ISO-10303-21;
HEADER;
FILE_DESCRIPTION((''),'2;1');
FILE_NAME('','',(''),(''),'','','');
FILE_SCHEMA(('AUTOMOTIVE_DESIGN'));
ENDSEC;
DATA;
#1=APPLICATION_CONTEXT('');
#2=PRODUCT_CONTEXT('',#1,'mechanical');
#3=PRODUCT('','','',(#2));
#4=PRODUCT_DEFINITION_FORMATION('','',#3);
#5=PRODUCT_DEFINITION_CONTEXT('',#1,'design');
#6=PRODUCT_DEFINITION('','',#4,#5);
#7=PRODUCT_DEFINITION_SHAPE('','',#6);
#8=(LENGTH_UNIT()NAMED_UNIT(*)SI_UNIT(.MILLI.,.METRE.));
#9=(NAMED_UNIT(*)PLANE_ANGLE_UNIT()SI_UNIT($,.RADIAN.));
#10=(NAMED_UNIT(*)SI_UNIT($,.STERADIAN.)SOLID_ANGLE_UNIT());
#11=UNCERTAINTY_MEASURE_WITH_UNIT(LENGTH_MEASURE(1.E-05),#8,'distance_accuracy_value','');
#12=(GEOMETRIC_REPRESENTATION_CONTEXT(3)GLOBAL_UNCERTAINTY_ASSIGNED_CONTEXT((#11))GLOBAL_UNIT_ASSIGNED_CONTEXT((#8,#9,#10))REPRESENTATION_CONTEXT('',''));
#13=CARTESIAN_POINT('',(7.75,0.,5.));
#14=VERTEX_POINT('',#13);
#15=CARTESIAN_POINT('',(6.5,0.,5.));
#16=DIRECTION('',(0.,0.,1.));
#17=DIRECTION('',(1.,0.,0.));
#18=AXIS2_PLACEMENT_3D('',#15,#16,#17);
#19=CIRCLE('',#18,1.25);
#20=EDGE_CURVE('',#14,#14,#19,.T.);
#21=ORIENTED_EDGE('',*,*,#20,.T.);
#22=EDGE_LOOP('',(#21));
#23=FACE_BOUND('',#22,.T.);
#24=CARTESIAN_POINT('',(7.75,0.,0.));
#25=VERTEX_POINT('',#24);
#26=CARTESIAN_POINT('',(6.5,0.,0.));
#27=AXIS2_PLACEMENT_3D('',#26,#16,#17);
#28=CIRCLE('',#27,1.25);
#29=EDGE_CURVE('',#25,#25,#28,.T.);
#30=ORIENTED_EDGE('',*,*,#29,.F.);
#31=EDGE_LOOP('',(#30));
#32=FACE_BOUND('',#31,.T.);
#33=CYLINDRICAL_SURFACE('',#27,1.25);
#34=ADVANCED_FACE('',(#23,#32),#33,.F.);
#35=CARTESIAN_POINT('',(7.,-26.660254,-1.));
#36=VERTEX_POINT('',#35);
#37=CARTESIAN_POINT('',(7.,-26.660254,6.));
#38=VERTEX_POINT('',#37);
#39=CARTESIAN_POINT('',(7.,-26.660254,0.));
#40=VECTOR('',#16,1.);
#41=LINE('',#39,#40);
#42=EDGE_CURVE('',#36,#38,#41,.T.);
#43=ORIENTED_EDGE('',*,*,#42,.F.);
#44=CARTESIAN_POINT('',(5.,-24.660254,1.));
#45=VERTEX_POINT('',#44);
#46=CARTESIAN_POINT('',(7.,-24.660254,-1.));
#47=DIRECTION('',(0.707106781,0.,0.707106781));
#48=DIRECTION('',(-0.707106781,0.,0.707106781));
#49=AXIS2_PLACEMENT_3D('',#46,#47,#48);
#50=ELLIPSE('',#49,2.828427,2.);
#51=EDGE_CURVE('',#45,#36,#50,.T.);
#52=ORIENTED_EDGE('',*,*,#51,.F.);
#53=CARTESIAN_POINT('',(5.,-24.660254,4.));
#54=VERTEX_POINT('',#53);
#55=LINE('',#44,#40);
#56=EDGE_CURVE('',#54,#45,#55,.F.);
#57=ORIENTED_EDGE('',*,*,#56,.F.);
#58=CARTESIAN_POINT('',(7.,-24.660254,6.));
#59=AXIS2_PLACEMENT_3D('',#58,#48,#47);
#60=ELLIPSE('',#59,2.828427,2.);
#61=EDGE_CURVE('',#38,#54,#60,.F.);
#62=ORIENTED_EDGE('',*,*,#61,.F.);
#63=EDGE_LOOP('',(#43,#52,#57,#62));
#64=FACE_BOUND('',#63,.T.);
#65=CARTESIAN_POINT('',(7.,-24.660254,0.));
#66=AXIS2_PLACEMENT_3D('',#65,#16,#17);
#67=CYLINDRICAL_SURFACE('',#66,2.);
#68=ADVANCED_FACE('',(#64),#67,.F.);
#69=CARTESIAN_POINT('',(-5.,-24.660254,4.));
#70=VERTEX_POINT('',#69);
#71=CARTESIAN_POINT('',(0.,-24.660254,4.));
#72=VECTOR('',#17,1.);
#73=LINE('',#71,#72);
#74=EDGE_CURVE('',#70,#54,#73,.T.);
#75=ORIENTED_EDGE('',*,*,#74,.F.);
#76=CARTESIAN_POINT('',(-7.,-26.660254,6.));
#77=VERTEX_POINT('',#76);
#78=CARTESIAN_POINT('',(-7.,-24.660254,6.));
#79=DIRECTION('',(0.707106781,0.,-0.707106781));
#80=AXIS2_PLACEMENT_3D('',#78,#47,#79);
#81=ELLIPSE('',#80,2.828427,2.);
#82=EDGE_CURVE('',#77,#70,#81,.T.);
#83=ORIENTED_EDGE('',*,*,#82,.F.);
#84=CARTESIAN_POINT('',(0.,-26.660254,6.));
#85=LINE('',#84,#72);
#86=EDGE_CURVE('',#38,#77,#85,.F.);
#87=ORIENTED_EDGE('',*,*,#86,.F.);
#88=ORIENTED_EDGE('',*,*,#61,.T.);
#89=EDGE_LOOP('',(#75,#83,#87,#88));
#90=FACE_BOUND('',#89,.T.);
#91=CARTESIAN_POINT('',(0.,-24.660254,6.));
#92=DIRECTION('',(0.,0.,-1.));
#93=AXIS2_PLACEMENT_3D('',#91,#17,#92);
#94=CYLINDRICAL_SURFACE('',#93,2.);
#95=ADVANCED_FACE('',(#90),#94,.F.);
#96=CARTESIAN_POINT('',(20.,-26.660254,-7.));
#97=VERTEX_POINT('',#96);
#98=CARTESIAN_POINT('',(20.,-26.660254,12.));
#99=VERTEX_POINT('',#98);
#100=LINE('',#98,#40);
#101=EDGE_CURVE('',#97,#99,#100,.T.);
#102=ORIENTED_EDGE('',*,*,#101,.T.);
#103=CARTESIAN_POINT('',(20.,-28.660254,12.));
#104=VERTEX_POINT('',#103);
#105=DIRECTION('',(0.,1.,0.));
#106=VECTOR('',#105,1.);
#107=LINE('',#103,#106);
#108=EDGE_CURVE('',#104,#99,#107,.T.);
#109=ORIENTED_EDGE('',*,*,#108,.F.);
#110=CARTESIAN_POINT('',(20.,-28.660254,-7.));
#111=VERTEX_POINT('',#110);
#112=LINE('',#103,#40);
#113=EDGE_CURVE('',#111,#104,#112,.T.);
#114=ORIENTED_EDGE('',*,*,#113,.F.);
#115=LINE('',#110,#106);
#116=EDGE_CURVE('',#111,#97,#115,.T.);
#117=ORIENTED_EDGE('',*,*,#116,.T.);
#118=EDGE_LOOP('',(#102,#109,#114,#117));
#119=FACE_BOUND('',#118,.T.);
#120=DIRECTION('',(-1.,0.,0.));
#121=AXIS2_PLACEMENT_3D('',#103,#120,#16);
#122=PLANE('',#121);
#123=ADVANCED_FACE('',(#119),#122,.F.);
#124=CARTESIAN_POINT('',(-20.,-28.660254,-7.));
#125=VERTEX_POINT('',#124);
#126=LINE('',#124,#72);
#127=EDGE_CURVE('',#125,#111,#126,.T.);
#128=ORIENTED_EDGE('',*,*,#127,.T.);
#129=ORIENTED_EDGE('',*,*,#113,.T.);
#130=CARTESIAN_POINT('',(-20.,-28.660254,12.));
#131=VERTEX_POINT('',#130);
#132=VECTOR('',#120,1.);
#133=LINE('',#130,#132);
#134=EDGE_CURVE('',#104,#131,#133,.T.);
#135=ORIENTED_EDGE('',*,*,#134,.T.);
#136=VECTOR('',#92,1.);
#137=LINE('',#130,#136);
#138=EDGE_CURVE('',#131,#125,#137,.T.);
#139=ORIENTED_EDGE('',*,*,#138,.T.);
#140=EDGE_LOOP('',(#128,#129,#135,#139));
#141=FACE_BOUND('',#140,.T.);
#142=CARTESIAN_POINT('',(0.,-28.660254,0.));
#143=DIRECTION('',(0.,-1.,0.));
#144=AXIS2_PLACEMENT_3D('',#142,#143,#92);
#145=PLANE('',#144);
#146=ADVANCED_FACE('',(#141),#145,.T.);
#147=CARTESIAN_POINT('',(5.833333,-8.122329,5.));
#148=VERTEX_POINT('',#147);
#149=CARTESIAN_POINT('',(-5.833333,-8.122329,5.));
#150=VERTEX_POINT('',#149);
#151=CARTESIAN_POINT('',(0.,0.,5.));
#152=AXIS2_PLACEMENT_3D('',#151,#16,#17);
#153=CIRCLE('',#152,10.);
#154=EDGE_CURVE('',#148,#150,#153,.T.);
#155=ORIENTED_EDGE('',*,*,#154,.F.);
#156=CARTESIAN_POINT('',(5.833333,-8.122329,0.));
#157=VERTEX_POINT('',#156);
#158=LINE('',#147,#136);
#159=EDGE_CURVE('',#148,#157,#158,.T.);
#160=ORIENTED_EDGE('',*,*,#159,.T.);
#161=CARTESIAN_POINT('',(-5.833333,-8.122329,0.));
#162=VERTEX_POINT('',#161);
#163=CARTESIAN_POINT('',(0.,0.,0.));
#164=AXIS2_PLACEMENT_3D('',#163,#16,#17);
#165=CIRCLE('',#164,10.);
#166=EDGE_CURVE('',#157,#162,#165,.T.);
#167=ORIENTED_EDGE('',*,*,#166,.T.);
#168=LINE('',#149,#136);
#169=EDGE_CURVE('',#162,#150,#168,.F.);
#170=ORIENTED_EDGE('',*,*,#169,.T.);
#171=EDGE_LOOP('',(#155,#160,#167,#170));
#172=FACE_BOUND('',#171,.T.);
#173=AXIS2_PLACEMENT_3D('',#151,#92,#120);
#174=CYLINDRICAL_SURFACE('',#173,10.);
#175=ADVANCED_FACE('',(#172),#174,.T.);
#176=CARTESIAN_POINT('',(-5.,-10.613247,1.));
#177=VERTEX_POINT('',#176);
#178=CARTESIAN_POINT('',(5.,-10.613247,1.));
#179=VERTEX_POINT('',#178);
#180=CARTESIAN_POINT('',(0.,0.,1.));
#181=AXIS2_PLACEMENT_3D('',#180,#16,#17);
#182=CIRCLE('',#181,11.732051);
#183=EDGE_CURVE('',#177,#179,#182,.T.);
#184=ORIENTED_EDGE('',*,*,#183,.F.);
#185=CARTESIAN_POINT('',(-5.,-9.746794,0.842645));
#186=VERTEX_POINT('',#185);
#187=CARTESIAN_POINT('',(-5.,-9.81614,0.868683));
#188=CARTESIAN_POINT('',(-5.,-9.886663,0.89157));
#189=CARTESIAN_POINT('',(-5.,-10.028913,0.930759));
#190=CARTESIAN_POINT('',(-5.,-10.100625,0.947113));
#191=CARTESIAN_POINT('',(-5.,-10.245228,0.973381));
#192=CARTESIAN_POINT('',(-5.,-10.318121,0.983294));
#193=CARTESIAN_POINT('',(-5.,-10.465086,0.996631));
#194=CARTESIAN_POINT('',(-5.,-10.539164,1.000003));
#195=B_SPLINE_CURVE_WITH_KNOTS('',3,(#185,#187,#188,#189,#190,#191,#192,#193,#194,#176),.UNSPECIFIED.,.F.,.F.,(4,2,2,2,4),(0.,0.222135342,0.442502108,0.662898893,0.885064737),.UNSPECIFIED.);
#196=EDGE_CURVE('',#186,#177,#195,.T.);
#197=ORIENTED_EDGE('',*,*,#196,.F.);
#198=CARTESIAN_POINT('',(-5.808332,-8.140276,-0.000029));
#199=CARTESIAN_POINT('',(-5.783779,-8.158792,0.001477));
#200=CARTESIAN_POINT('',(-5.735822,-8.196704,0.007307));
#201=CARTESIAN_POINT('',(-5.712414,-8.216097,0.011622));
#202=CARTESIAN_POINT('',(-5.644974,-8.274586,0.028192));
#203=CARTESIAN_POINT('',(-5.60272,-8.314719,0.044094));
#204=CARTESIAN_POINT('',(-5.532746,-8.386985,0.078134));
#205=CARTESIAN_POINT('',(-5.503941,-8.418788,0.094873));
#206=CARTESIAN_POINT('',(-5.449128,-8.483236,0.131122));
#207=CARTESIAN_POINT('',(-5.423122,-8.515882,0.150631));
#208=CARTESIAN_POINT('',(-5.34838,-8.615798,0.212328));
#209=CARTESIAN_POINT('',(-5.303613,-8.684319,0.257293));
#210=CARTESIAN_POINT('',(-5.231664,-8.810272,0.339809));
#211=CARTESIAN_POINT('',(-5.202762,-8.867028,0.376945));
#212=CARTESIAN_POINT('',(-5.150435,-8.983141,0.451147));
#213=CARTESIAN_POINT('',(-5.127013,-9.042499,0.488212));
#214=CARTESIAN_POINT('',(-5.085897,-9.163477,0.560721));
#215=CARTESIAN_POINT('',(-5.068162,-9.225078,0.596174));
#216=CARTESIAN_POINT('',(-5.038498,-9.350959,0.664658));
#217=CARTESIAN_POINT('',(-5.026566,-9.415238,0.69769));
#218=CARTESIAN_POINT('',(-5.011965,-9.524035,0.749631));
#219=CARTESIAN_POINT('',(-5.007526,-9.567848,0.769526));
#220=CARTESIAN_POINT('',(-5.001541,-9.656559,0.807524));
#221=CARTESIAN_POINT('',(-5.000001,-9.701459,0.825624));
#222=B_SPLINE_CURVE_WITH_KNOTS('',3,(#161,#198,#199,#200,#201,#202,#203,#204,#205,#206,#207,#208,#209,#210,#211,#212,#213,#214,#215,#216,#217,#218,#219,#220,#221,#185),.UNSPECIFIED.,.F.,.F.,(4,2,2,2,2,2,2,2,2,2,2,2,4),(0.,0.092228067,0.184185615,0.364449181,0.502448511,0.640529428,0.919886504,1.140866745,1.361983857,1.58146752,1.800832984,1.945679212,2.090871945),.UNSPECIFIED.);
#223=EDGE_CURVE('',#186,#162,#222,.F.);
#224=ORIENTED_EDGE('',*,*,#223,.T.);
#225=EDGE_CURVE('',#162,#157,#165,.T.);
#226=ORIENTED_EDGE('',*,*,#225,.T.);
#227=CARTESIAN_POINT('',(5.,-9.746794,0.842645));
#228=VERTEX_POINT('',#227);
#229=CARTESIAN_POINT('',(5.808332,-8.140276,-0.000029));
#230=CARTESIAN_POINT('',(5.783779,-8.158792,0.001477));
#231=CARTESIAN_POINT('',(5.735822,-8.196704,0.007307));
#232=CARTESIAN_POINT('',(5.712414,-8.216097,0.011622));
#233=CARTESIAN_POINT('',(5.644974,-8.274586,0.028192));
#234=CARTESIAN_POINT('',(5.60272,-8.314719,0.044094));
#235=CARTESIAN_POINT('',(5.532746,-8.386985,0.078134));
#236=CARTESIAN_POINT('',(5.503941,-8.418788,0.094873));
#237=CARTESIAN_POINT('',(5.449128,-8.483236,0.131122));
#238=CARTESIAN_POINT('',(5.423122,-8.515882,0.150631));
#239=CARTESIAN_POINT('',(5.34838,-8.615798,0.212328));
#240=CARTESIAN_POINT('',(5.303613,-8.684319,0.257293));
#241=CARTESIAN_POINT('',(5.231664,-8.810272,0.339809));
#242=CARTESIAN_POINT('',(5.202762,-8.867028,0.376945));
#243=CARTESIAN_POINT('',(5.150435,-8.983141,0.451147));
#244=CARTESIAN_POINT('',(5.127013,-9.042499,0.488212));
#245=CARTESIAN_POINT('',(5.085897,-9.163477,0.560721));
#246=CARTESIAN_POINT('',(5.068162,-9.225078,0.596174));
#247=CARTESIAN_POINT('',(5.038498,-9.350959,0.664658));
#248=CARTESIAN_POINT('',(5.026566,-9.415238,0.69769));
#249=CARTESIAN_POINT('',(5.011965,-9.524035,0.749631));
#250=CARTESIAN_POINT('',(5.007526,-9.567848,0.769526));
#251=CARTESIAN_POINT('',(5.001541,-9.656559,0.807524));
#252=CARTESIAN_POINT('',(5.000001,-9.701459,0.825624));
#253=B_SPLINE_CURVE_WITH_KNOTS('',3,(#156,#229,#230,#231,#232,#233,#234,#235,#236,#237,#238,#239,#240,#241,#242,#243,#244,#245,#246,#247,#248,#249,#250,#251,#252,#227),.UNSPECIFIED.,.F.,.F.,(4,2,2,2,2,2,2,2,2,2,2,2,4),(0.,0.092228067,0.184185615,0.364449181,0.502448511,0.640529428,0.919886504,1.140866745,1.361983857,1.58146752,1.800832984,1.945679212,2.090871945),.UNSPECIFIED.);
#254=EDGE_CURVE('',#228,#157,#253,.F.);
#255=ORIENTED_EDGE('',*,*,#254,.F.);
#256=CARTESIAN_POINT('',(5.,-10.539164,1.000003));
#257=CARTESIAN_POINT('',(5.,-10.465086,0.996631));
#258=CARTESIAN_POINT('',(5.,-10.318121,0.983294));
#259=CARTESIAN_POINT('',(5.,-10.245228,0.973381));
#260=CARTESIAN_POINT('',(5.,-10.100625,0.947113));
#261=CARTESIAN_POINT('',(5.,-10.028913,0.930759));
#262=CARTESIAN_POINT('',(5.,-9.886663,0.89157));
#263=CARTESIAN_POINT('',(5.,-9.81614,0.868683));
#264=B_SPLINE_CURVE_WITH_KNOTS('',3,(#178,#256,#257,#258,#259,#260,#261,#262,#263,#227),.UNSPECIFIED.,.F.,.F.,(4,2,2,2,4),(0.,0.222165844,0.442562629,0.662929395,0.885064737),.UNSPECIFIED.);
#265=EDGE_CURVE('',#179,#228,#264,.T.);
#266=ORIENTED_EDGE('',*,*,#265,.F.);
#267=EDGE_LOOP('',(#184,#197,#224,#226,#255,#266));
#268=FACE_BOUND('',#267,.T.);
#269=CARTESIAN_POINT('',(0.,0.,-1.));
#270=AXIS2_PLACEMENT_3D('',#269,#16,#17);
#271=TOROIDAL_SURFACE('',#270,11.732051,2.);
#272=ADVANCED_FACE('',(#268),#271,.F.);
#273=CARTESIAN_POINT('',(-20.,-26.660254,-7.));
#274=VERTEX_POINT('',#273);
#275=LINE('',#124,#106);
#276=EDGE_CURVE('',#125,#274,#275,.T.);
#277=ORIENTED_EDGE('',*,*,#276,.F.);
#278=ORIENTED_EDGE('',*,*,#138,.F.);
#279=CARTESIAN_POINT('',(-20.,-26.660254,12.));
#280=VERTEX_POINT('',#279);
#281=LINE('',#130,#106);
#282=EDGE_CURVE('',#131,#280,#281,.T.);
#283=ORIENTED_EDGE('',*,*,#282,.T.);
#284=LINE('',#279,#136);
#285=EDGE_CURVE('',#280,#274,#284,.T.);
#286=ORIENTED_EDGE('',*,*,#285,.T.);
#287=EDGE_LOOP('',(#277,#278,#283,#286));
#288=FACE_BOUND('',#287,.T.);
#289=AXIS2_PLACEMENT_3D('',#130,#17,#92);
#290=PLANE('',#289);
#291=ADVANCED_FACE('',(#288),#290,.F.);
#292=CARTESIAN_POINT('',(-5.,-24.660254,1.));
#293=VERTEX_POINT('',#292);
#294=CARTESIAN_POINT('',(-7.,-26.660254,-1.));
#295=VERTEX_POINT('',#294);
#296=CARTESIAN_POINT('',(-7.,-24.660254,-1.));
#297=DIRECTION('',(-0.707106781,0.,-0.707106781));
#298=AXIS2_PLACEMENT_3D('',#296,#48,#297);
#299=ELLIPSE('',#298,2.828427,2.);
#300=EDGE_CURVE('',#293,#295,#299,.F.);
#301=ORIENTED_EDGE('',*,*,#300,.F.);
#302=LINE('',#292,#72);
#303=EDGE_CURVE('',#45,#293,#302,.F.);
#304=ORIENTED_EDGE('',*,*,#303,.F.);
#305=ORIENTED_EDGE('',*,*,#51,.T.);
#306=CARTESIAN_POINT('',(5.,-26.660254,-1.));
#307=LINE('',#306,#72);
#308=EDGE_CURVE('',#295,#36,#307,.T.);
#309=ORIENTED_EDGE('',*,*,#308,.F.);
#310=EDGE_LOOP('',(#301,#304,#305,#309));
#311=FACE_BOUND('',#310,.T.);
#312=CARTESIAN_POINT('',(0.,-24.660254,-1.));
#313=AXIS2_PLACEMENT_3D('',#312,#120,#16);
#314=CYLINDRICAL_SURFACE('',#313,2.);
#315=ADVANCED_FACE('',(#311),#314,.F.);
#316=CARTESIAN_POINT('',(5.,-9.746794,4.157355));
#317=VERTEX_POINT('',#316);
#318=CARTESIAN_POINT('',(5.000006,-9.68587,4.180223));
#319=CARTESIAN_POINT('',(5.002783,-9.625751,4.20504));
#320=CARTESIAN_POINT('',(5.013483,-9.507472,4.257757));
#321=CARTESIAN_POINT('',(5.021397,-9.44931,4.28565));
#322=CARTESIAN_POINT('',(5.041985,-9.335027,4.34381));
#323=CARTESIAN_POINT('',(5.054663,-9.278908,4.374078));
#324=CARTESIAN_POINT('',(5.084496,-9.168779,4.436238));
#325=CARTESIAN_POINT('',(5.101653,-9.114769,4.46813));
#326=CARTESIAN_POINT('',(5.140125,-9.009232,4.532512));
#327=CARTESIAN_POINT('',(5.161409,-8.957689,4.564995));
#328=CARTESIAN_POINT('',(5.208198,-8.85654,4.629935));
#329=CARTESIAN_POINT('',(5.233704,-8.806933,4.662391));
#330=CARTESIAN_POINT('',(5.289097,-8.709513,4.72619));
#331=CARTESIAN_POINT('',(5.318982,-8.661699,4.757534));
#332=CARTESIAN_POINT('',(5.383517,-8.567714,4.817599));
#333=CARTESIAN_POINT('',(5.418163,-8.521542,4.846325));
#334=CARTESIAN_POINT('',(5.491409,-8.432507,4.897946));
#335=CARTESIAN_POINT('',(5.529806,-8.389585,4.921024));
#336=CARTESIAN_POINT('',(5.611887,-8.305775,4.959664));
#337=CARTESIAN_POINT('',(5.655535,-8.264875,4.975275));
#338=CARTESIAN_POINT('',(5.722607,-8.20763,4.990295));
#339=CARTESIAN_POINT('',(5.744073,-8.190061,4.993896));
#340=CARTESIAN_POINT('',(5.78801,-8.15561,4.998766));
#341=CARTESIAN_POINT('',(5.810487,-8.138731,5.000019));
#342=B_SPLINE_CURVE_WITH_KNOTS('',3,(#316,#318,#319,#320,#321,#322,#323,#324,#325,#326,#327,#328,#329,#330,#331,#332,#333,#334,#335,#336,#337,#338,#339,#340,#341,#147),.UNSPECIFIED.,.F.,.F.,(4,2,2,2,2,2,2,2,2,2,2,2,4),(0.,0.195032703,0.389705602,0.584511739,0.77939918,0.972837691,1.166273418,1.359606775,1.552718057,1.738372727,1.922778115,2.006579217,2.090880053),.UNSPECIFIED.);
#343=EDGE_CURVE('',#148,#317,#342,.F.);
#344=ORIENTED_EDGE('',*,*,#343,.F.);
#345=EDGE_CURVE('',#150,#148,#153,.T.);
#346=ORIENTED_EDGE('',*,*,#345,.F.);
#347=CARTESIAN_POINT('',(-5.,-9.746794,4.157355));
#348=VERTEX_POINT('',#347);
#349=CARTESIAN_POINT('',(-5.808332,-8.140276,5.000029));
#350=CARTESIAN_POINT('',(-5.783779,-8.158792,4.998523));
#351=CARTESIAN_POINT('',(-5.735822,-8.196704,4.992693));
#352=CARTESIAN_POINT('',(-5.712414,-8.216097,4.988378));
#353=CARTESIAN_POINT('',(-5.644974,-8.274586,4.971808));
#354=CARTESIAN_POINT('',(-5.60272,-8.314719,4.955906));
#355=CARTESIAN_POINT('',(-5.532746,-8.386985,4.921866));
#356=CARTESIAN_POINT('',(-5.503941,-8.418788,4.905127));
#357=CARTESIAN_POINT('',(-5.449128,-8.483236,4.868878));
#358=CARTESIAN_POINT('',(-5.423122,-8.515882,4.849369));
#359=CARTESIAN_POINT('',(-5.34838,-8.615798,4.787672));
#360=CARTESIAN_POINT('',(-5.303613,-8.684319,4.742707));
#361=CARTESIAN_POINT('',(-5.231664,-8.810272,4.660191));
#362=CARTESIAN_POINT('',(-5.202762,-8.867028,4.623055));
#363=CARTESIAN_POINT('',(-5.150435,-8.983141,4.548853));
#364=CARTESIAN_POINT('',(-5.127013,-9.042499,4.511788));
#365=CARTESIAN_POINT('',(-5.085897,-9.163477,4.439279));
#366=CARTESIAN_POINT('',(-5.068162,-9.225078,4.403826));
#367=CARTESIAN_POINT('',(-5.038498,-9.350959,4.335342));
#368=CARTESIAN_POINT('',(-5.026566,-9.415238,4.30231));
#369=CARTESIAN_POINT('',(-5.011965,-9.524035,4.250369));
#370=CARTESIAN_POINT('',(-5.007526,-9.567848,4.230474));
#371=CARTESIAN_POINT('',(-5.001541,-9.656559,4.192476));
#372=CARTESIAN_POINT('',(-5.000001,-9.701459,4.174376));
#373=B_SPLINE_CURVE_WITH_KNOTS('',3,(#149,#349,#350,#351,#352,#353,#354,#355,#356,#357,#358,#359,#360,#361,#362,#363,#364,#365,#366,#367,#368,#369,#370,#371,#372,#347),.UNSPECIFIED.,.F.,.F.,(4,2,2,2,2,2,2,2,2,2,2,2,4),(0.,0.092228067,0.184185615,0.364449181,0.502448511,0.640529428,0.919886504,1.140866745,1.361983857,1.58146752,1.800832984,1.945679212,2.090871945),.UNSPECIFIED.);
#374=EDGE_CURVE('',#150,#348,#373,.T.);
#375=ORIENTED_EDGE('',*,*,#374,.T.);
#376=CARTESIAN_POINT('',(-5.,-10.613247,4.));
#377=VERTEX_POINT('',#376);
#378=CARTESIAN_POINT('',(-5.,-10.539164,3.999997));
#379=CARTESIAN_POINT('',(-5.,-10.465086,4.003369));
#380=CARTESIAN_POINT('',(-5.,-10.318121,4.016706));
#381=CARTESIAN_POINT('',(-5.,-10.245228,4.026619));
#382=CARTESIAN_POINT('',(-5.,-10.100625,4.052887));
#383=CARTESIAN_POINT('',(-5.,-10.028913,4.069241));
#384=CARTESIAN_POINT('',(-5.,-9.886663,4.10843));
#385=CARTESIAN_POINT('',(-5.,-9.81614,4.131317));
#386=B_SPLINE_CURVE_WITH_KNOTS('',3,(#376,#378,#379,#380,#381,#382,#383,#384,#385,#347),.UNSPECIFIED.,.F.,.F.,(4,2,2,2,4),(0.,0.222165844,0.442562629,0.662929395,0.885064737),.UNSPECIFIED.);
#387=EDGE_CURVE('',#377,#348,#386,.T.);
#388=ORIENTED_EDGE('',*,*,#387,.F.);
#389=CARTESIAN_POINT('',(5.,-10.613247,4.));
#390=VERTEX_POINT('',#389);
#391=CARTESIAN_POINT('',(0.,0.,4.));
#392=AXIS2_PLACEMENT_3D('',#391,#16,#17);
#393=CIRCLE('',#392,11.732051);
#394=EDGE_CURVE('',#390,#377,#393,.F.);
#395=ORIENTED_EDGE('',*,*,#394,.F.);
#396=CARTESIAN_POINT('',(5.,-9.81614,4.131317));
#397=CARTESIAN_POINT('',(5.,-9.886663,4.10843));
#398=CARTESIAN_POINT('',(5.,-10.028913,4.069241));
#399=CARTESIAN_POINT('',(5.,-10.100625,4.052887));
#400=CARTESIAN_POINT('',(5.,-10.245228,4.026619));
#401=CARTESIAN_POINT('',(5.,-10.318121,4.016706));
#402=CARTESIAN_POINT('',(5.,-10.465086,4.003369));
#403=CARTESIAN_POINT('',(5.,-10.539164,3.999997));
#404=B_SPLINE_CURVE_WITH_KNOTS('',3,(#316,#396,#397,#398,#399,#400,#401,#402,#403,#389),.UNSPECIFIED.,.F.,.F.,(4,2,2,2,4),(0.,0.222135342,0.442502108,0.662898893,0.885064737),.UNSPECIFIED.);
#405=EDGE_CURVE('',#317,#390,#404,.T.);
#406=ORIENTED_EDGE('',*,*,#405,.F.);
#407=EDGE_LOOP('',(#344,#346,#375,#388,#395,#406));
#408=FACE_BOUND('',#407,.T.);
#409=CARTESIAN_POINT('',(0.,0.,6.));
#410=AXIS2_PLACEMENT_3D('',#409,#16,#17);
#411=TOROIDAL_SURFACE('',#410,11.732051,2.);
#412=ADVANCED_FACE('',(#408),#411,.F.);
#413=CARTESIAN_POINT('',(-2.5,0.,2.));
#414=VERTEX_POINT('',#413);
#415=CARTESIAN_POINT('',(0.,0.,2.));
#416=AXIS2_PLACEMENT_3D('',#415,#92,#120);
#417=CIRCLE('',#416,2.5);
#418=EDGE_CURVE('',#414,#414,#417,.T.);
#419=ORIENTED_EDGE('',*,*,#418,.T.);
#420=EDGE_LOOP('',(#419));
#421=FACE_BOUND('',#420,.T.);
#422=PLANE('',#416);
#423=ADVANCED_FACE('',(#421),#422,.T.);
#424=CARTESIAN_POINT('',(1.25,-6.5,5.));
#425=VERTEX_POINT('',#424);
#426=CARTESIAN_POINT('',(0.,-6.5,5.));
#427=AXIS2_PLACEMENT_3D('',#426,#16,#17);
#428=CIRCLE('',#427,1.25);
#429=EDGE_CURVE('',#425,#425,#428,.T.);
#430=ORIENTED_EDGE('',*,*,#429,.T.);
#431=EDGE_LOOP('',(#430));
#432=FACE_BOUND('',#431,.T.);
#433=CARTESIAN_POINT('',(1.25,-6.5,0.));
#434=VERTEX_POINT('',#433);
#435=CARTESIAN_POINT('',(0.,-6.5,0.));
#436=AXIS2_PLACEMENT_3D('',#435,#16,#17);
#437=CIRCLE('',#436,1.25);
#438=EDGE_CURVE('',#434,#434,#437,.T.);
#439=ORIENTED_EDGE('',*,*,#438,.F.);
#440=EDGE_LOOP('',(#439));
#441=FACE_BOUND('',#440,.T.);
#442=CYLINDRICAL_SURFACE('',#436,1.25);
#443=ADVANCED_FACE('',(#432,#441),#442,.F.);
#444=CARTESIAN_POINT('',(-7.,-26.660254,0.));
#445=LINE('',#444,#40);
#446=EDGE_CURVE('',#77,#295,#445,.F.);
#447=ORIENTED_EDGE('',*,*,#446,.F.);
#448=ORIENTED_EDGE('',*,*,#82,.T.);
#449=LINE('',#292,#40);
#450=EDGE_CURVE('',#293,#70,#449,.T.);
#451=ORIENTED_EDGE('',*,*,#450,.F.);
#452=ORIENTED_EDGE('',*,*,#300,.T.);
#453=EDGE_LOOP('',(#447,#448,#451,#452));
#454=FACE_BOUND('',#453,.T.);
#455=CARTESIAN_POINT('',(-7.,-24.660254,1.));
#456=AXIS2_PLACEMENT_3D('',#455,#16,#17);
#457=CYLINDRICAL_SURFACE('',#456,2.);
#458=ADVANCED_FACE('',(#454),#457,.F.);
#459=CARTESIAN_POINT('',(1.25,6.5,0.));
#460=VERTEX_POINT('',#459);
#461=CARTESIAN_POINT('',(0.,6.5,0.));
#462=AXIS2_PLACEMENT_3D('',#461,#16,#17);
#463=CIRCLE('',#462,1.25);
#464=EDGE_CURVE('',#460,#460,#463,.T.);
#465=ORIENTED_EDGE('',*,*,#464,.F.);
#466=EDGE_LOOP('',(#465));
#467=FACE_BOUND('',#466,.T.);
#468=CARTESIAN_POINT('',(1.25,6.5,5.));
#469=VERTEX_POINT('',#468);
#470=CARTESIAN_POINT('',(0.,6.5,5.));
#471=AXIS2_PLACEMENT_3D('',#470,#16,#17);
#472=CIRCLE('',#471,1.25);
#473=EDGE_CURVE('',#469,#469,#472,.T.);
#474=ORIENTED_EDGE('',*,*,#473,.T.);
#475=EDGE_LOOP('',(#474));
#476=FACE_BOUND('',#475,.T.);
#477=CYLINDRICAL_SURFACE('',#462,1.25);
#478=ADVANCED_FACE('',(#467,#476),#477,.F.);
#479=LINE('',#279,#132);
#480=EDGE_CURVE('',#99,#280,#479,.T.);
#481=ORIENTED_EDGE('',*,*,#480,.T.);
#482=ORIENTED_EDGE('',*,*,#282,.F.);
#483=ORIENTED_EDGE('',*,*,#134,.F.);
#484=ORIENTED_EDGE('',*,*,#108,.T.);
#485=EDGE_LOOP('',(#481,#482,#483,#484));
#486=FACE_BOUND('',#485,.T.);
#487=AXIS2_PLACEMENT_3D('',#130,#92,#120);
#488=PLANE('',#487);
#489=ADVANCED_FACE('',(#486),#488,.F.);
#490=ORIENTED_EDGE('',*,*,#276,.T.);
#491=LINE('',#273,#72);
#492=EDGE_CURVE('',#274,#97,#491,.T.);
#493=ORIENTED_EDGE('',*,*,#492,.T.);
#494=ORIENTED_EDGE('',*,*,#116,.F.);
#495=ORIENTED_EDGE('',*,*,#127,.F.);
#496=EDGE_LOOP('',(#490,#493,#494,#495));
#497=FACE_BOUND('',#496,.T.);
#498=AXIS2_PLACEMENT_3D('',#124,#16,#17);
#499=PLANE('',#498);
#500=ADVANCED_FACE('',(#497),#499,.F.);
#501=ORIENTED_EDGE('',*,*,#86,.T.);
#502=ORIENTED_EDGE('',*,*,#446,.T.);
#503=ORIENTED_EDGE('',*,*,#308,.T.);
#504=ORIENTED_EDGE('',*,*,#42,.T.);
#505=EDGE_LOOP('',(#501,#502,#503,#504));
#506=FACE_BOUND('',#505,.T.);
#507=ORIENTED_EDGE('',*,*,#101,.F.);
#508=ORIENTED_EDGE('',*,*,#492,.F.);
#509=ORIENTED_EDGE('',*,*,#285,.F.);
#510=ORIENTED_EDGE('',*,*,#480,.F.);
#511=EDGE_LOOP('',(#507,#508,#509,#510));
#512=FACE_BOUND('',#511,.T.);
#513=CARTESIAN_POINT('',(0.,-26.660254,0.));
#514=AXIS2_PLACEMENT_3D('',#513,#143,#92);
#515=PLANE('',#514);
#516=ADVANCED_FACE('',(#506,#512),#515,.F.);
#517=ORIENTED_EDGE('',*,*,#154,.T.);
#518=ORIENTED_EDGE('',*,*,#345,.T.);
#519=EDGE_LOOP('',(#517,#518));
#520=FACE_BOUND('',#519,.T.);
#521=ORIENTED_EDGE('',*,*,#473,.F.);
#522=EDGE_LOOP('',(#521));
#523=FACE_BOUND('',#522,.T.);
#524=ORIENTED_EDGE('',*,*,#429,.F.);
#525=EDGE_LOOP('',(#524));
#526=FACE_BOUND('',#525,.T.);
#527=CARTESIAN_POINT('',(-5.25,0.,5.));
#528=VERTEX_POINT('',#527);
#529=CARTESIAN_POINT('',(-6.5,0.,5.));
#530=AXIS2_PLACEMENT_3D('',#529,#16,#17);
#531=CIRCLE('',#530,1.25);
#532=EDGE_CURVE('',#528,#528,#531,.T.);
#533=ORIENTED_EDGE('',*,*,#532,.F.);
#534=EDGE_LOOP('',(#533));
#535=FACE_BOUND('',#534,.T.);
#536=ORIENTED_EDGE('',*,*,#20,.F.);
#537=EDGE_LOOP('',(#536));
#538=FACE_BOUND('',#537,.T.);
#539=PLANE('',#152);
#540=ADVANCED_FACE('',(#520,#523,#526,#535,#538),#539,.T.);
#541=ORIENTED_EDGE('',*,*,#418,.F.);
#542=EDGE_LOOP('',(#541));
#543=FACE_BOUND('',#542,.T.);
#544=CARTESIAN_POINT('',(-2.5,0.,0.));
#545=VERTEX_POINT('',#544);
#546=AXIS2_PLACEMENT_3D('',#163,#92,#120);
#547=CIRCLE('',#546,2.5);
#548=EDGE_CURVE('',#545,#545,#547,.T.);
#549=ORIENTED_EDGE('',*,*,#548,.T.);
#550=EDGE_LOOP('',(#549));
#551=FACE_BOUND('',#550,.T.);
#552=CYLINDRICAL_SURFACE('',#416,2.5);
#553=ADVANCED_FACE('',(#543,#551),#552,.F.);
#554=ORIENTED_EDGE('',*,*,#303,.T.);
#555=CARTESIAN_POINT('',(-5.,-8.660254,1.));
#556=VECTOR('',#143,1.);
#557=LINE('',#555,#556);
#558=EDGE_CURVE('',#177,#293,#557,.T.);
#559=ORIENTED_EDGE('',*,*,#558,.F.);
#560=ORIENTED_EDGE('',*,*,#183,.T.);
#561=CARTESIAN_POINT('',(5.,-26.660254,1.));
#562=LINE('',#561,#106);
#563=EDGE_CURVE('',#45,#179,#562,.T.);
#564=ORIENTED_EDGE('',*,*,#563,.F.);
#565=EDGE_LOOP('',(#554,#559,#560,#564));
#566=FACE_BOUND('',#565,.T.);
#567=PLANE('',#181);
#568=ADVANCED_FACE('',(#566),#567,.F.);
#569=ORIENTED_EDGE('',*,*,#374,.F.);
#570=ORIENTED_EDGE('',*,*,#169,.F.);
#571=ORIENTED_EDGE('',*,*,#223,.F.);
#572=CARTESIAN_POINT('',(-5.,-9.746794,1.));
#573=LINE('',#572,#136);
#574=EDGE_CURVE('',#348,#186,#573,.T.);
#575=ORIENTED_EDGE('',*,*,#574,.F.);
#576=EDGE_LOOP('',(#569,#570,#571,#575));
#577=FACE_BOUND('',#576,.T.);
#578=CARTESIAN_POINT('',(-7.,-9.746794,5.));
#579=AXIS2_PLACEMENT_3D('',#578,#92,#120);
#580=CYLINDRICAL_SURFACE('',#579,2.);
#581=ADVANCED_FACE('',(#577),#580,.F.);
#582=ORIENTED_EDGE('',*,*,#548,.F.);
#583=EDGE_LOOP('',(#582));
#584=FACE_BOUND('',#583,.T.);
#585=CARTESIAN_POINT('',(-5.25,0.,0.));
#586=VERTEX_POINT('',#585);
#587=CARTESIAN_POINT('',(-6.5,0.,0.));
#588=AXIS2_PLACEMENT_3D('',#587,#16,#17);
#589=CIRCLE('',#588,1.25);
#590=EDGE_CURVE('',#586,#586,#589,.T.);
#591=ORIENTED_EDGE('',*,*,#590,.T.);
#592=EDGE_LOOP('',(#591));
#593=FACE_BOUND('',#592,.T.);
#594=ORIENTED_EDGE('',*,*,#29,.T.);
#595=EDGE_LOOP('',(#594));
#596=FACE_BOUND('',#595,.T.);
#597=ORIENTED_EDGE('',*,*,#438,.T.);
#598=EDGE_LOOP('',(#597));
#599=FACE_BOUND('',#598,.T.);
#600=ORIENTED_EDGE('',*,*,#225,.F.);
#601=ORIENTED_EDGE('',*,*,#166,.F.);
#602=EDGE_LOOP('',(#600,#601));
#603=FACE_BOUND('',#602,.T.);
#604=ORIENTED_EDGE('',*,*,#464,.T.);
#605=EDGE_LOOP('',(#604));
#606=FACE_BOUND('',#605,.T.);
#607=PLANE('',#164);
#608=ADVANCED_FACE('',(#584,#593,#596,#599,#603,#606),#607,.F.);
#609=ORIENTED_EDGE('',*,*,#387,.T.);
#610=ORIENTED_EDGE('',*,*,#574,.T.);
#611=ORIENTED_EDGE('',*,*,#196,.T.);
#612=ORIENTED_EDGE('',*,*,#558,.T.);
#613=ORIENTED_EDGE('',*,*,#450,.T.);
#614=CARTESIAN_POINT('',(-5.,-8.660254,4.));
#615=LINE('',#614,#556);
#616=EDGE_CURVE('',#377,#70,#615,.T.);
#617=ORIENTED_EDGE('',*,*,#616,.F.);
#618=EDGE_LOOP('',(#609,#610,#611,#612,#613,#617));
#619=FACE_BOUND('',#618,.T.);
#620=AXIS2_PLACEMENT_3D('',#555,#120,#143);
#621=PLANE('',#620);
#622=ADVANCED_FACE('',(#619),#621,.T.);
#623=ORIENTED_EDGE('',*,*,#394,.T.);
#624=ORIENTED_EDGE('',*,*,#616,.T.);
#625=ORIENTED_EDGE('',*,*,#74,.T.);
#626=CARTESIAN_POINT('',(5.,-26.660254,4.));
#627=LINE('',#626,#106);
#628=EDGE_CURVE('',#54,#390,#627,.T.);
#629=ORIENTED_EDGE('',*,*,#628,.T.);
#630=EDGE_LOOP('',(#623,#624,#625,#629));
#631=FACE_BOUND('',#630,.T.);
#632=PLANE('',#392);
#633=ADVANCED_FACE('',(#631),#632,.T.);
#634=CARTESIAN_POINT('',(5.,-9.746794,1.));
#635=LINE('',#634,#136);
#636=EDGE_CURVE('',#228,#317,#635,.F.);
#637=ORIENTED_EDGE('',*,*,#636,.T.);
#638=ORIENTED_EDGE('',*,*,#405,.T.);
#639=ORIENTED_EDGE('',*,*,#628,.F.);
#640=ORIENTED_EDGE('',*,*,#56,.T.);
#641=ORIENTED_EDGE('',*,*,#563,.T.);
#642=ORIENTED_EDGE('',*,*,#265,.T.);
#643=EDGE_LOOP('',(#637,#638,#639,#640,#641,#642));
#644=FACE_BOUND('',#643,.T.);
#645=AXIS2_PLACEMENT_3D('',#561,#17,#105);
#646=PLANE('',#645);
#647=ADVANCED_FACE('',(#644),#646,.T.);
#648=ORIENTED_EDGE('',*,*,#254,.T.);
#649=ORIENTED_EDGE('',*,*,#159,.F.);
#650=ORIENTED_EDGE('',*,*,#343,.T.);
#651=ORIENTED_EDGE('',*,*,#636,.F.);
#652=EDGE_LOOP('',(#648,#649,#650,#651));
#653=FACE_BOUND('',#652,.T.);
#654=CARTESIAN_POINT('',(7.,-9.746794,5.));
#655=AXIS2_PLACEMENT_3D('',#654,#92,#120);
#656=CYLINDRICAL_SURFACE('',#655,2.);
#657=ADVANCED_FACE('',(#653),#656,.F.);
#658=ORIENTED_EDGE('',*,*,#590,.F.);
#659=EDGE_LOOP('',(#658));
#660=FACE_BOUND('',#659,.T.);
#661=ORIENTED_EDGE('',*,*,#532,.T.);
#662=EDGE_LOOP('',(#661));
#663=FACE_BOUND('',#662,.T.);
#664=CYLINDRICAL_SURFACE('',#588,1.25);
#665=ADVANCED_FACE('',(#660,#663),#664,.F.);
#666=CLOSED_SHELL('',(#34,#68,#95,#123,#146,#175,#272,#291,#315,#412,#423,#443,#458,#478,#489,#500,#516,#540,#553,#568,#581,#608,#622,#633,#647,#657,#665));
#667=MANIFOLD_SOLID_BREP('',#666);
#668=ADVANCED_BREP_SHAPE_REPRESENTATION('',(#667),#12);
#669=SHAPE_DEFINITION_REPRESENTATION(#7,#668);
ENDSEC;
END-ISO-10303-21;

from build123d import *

# Parameters (mm, degrees)
SKETCH1_R            = 10
BOSS_EXTRUDE1_DEPTH  = 5
SKETCH2_R            = 1.25
CUT_EXTRUDE1_DEPTH   = 16
SKETCH3_R            = 2.5
CUT_EXTRUDE2_DEPTH   = 2
EXTRUDE_1_DEPTH      = 1.5
EXTRUDE_1_DEPTH_BACK = 1.5
SKETCH_3_W           = 40
SKETCH_3_H           = 19
EXTRUDE_2_DEPTH      = 2
FILLET_1_R           = 2


with BuildPart() as part:
    # Sketch1 → Boss-Extrude1 (new body)
    with BuildSketch(Plane.XY):
        Circle(SKETCH1_R)
    extrude(amount=BOSS_EXTRUDE1_DEPTH)

    # Sketch2 → Cut-Extrude1 (cut, through all)
    with BuildSketch(Plane.XY.offset(5)):
        with Locations((0, 6.5)):
            Circle(SKETCH2_R)
        with Locations((6.5, 0)):
            Circle(SKETCH2_R)
        with Locations((0, -6.5)):
            Circle(SKETCH2_R)
        with Locations((-6.5, 0)):
            Circle(SKETCH2_R)
    extrude(amount=-CUT_EXTRUDE1_DEPTH, mode=Mode.SUBTRACT)

    # Sketch3 → Cut-Extrude2 (cut)
    with BuildSketch(Plane(origin=(0, 0, 0), x_dir=(-1, 0, 0), z_dir=(0, 0, -1))):
        Circle(SKETCH3_R)
    extrude(amount=-CUT_EXTRUDE2_DEPTH, mode=Mode.SUBTRACT)

    # 草图2 → 凸台-拉伸1 (add, two sides: drawn at the far end of the back side and taken through both)
    with BuildSketch(Plane.XY.offset(2.5).offset(-EXTRUDE_1_DEPTH_BACK)):
        with BuildLine():
            Line((-5, -8.660254038), (-5, -26.660254038))
            Line((-5, -26.660254038), (5, -26.660254038))
            Line((5, -26.660254038), (5, -8.660254038))
            ThreePointArc((5, -8.660254038), (0, -10), (-5, -8.660254038))
        make_face()
    extrude(amount=EXTRUDE_1_DEPTH + EXTRUDE_1_DEPTH_BACK)

    # 草图3 → 凸台-拉伸2 (add)
    with BuildSketch(Plane.XZ.offset(26.660254038)):
        with Locations((0, 2.5)):
            Rectangle(SKETCH_3_W, SKETCH_3_H)
    extrude(amount=EXTRUDE_2_DEPTH)

    # 圆角1
    # the kernel refuses this fillet: 2 mm, written as the material it adds along each edge
    with BuildSketch(Plane(origin=(-5, -8.660254038, 4), x_dir=(0, -1, 0), z_dir=(0, 0, -1))) as fillet_1_piece_1:
        with BuildLine():
            CenterArc((1.086540307, 2), FILLET_1_R, 215.685334713, 54.314665287)
            Line((-0.537925417, 0.833333333), (-0.570414732, 0.81))
            ThreePointArc((-0.570414732, 0.81), (-0.292230876, 0.40164682), (-0.034641016, -0.02))
            Line((-0.034641016, -0.02), (0, -0.04))
            Line((0, -0.04), (1.086540307, -0.04))
            Line((1.086540307, -0.04), (1.086540307, 0))
        make_face()
    extrude(amount=3)
    with BuildSketch(Plane(origin=(0, 0, 1), x_dir=(0.8172880266959527, -0.5762293652873269, 0), z_dir=(0.5762293652873269, 0.8172880266959527, 0))) as fillet_1_piece_2_section:
        with BuildLine():
            CenterArc((11.732050808, 2), FILLET_1_R, 210, 60)
            Line((10, 1), (9.965358984, 0.98))
            ThreePointArc((9.965358984, 0.98), (9.96, 0.5), (9.96, 0))
            Line((9.96, 0), (10, -0.04))
            Line((10, -0.04), (11.732050808, -0.04))
            Line((11.732050808, -0.04), (11.732050808, 0))
        make_face()
    fillet_1_piece_2 = revolve(axis=Axis((0, 0, 1), (0, 0, -1)), revolution_arc=109.628458137, mode=Mode.PRIVATE)
    fillet_1_piece_2 = split(fillet_1_piece_2, bisect_by=Plane(origin=(5, -10.001483163, 0.740495883), z_dir=(-1, 0, 0)), keep=Keep.TOP, mode=Mode.PRIVATE)
    fillet_1_piece_2 = split(fillet_1_piece_2, bisect_by=Plane(origin=(-5, -10.001483163, 0.740495883), z_dir=(1, 0, 0)), keep=Keep.TOP, mode=Mode.PRIVATE)
    add(fillet_1_piece_2)
    with BuildSketch(Plane(origin=(5, -8.660254038, 4), x_dir=(0, -1, 0), z_dir=(0, 0, -1))) as fillet_1_piece_3:
        with BuildLine():
            CenterArc((1.086540307, -2), FILLET_1_R, 90, 54.314665287)
            Line((-0.537925417, -0.833333333), (-0.570414732, -0.81))
            ThreePointArc((-0.570414732, -0.81), (-0.292230876, -0.40164682), (-0.034641016, 0.02))
            Line((-0.034641016, 0.02), (0, 0.04))
            Line((0, 0.04), (1.086540307, 0.04))
            Line((1.086540307, 0.04), (1.086540307, 0))
        make_face()
    extrude(amount=3)
    with BuildSketch(Plane(origin=(5, -26.660254038, 1), x_dir=(1, 0, 0), z_dir=(0, 0, 1))) as fillet_1_piece_4:
        with BuildLine():
            CenterArc((FILLET_1_R, FILLET_1_R), FILLET_1_R, 180, 90)
            Line((0, FILLET_1_R), (-FILLET_1_R * 0.02, FILLET_1_R))
            Line((-FILLET_1_R * 0.02, FILLET_1_R), (-FILLET_1_R * 0.02, -FILLET_1_R * 0.02))
            Line((-FILLET_1_R * 0.02, -FILLET_1_R * 0.02), (FILLET_1_R, -FILLET_1_R * 0.02))
            Line((FILLET_1_R, -FILLET_1_R * 0.02), (FILLET_1_R, 0))
        make_face()
    extrude(amount=3)
    with BuildSketch(Plane(origin=(-5, -26.660254038, 1), x_dir=(0, 0, -1), z_dir=(1, 0, 0))) as fillet_1_piece_5:
        with BuildLine():
            CenterArc((FILLET_1_R, FILLET_1_R), FILLET_1_R, 180, 90)
            Line((0, FILLET_1_R), (-FILLET_1_R * 0.02, FILLET_1_R))
            Line((-FILLET_1_R * 0.02, FILLET_1_R), (-FILLET_1_R * 0.02, -FILLET_1_R * 0.02))
            Line((-FILLET_1_R * 0.02, -FILLET_1_R * 0.02), (FILLET_1_R, -FILLET_1_R * 0.02))
            Line((FILLET_1_R, -FILLET_1_R * 0.02), (FILLET_1_R, 0))
        make_face()
    extrude(amount=10)
    with BuildSketch(Plane(origin=(-5, -26.660254038, 1), x_dir=(-1, 0, 0), z_dir=(0, 0, 1))) as fillet_1_piece_6:
        with BuildLine():
            CenterArc((FILLET_1_R, -FILLET_1_R), FILLET_1_R, 90, 90)
            Line((0, -FILLET_1_R), (-FILLET_1_R * 0.02, -FILLET_1_R))
            Line((-FILLET_1_R * 0.02, -FILLET_1_R), (-FILLET_1_R * 0.02, FILLET_1_R * 0.02))
            Line((-FILLET_1_R * 0.02, FILLET_1_R * 0.02), (FILLET_1_R, FILLET_1_R * 0.02))
            Line((FILLET_1_R, FILLET_1_R * 0.02), (FILLET_1_R, 0))
        make_face()
    extrude(amount=3)
    with BuildSketch(Plane(origin=(0, 0, 4), x_dir=(0.8172880266959527, -0.5762293652873269, 0), z_dir=(0.5762293652873269, 0.8172880266959527, 0))) as fillet_1_piece_7_section:
        with BuildLine():
            CenterArc((11.732050808, -2), FILLET_1_R, 90, 60)
            Line((10, -1), (9.965358984, -0.98))
            ThreePointArc((9.965358984, -0.98), (9.96, -0.5), (9.96, 0))
            Line((9.96, 0), (10, 0.04))
            Line((10, 0.04), (11.732050808, 0.04))
            Line((11.732050808, 0.04), (11.732050808, 0))
        make_face()
    fillet_1_piece_7 = revolve(axis=Axis((0, 0, 4), (0, 0, -1)), revolution_arc=109.628458137, mode=Mode.PRIVATE)
    fillet_1_piece_7 = split(fillet_1_piece_7, bisect_by=Plane(origin=(-5, -10.001483163, 4.259504117), z_dir=(1, 0, 0)), keep=Keep.TOP, mode=Mode.PRIVATE)
    fillet_1_piece_7 = split(fillet_1_piece_7, bisect_by=Plane(origin=(5, -10.001483163, 4.259504117), z_dir=(-1, 0, 0)), keep=Keep.TOP, mode=Mode.PRIVATE)
    add(fillet_1_piece_7)
    with BuildSketch(Plane(origin=(-5, -26.660254038, 4), x_dir=(0, 0, 1), z_dir=(1, 0, 0))) as fillet_1_piece_8:
        with BuildLine():
            CenterArc((FILLET_1_R, -FILLET_1_R), FILLET_1_R, 90, 90)
            Line((0, -FILLET_1_R), (-FILLET_1_R * 0.02, -FILLET_1_R))
            Line((-FILLET_1_R * 0.02, -FILLET_1_R), (-FILLET_1_R * 0.02, FILLET_1_R * 0.02))
            Line((-FILLET_1_R * 0.02, FILLET_1_R * 0.02), (FILLET_1_R, FILLET_1_R * 0.02))
            Line((FILLET_1_R, FILLET_1_R * 0.02), (FILLET_1_R, 0))
        make_face()
    extrude(amount=10)
    with BuildSketch(Plane(origin=(0, 0, 4), x_dir=(0.8172880266959527, -0.5762293652873269, 0), z_dir=(0.5762293652873269, 0.8172880266959527, 0))) as fillet_1_piece_9a_section:
        with BuildLine():
            CenterArc((11.732050808, -2), FILLET_1_R, 90, 60)
            Line((10, -1), (9.965358984, -0.98))
            ThreePointArc((9.965358984, -0.98), (9.96, -0.5), (9.96, 0))
            Line((9.96, 0), (10, 0.04))
            Line((10, 0.04), (11.732050808, 0.04))
            Line((11.732050808, 0.04), (11.732050808, 0))
        make_face()
    fillet_1_piece_9a = revolve(axis=Axis((0, 0, 4), (0, 0, -1)), revolution_arc=109.628458137, mode=Mode.PRIVATE)
    fillet_1_piece_9a = split(fillet_1_piece_9a, bisect_by=Plane(origin=(-5, -7.746585208, 4.247464025), z_dir=(-1, 0, 0)), keep=Keep.TOP, mode=Mode.PRIVATE)
    with BuildSketch(Plane(origin=(-5, -8.660254038, 6.716350767), x_dir=(0, -1, 0), z_dir=(0, 0, -1))) as fillet_1_piece_9b_section:
        with BuildLine():
            CenterArc((1.086540307, 2), FILLET_1_R, 215.685334713, 54.314665287)
            Line((-0.537925417, 0.833333333), (-0.570414732, 0.81))
            ThreePointArc((-0.570414732, 0.81), (-0.292230876, 0.40164682), (-0.034641016, -0.02))
            Line((-0.034641016, -0.02), (0, -0.04))
            Line((0, -0.04), (1.086540307, -0.04))
            Line((1.086540307, -0.04), (1.086540307, 0))
        make_face()
    fillet_1_piece_9b = extrude(amount=5.716350767, mode=Mode.PRIVATE)
    fillet_1_piece_9b = split(fillet_1_piece_9b, bisect_by=Plane(origin=(-5.179096693, -8.792679458, 4), z_dir=(0, 0, 1)), keep=Keep.TOP, mode=Mode.PRIVATE)
    fillet_1_piece_9b = split(fillet_1_piece_9b, bisect_by=Plane(origin=(-5.179096693, -8.792679458, 5), z_dir=(0, 0, -1)), keep=Keep.TOP, mode=Mode.PRIVATE)
    fillet_1_piece_9 = fillet_1_piece_9a & fillet_1_piece_9b
    add(fillet_1_piece_9)
    with BuildSketch(Plane(origin=(0, 0, 1), x_dir=(0.8172880266959527, -0.5762293652873269, 0), z_dir=(0.5762293652873269, 0.8172880266959527, 0))) as fillet_1_piece_10a_section:
        with BuildLine():
            CenterArc((11.732050808, 2), FILLET_1_R, 210, 60)
            Line((10, 1), (9.965358984, 0.98))
            ThreePointArc((9.965358984, 0.98), (9.96, 0.5), (9.96, 0))
            Line((9.96, 0), (10, -0.04))
            Line((10, -0.04), (11.732050808, -0.04))
            Line((11.732050808, -0.04), (11.732050808, 0))
        make_face()
    fillet_1_piece_10a = revolve(axis=Axis((0, 0, 1), (0, 0, -1)), revolution_arc=109.628458137, mode=Mode.PRIVATE)
    fillet_1_piece_10a = split(fillet_1_piece_10a, bisect_by=Plane(origin=(-5, -7.746585208, 0.752535975), z_dir=(-1, 0, 0)), keep=Keep.TOP, mode=Mode.PRIVATE)
    with BuildSketch(Plane(origin=(-5, -8.660254038, 4), x_dir=(0, -1, 0), z_dir=(0, 0, -1))) as fillet_1_piece_10b_section:
        with BuildLine():
            CenterArc((1.086540307, 2), FILLET_1_R, 215.685334713, 54.314665287)
            Line((-0.537925417, 0.833333333), (-0.570414732, 0.81))
            ThreePointArc((-0.570414732, 0.81), (-0.292230876, 0.40164682), (-0.034641016, -0.02))
            Line((-0.034641016, -0.02), (0, -0.04))
            Line((0, -0.04), (1.086540307, -0.04))
            Line((1.086540307, -0.04), (1.086540307, 0))
        make_face()
    fillet_1_piece_10b = extrude(amount=5.716350767, mode=Mode.PRIVATE)
    fillet_1_piece_10b = split(fillet_1_piece_10b, bisect_by=Plane(origin=(-5.179096693, -8.792679458, 1), z_dir=(0, 0, -1)), keep=Keep.TOP, mode=Mode.PRIVATE)
    fillet_1_piece_10b = split(fillet_1_piece_10b, bisect_by=Plane(origin=(-5.179096693, -8.792679458, 0), z_dir=(0, 0, 1)), keep=Keep.TOP, mode=Mode.PRIVATE)
    fillet_1_piece_10 = fillet_1_piece_10a & fillet_1_piece_10b
    add(fillet_1_piece_10)
    with BuildSketch(Plane(origin=(5, -8.660254038, 4), x_dir=(0, -1, 0), z_dir=(0, 0, -1))) as fillet_1_piece_11a_section:
        with BuildLine():
            CenterArc((1.086540307, -2), FILLET_1_R, 90, 54.314665287)
            Line((-0.537925417, -0.833333333), (-0.570414732, -0.81))
            ThreePointArc((-0.570414732, -0.81), (-0.292230876, -0.40164682), (-0.034641016, 0.02))
            Line((-0.034641016, 0.02), (0, 0.04))
            Line((0, 0.04), (1.086540307, 0.04))
            Line((1.086540307, 0.04), (1.086540307, 0))
        make_face()
    fillet_1_piece_11a = extrude(amount=5.716350767, mode=Mode.PRIVATE)
    fillet_1_piece_11a = split(fillet_1_piece_11a, bisect_by=Plane(origin=(5.179096693, -8.792679458, 1), z_dir=(0, 0, -1)), keep=Keep.TOP, mode=Mode.PRIVATE)
    fillet_1_piece_11a = split(fillet_1_piece_11a, bisect_by=Plane(origin=(5.179096693, -8.792679458, 0), z_dir=(0, 0, 1)), keep=Keep.TOP, mode=Mode.PRIVATE)
    with BuildSketch(Plane(origin=(0, 0, 1), x_dir=(0.8172880266959527, -0.5762293652873269, 0), z_dir=(0.5762293652873269, 0.8172880266959527, 0))) as fillet_1_piece_11b_section:
        with BuildLine():
            CenterArc((11.732050808, 2), FILLET_1_R, 210, 60)
            Line((10, 1), (9.965358984, 0.98))
            ThreePointArc((9.965358984, 0.98), (9.96, 0.5), (9.96, 0))
            Line((9.96, 0), (10, -0.04))
            Line((10, -0.04), (11.732050808, -0.04))
            Line((11.732050808, -0.04), (11.732050808, 0))
        make_face()
    fillet_1_piece_11b = revolve(axis=Axis((0, 0, 1), (0, 0, -1)), revolution_arc=109.628458137, mode=Mode.PRIVATE)
    fillet_1_piece_11b = split(fillet_1_piece_11b, bisect_by=Plane(origin=(5, -7.746585383, 0.752536044), z_dir=(1, 0, 0)), keep=Keep.TOP, mode=Mode.PRIVATE)
    fillet_1_piece_11 = fillet_1_piece_11a & fillet_1_piece_11b
    add(fillet_1_piece_11)
    with BuildSketch(Plane(origin=(0, 0, 4), x_dir=(0.8172880266959527, -0.5762293652873269, 0), z_dir=(0.5762293652873269, 0.8172880266959527, 0))) as fillet_1_piece_12a_section:
        with BuildLine():
            CenterArc((11.732050808, -2), FILLET_1_R, 90, 60)
            Line((10, -1), (9.965358984, -0.98))
            ThreePointArc((9.965358984, -0.98), (9.96, -0.5), (9.96, 0))
            Line((9.96, 0), (10, 0.04))
            Line((10, 0.04), (11.732050808, 0.04))
            Line((11.732050808, 0.04), (11.732050808, 0))
        make_face()
    fillet_1_piece_12a = revolve(axis=Axis((0, 0, 4), (0, 0, -1)), revolution_arc=109.628458137, mode=Mode.PRIVATE)
    fillet_1_piece_12a = split(fillet_1_piece_12a, bisect_by=Plane(origin=(5, -7.746585383, 4.247463956), z_dir=(1, 0, 0)), keep=Keep.TOP, mode=Mode.PRIVATE)
    with BuildSketch(Plane(origin=(5, -8.660254038, 6.716350767), x_dir=(0, -1, 0), z_dir=(0, 0, -1))) as fillet_1_piece_12b_section:
        with BuildLine():
            CenterArc((1.086540307, -2), FILLET_1_R, 90, 54.314665287)
            Line((-0.537925417, -0.833333333), (-0.570414732, -0.81))
            ThreePointArc((-0.570414732, -0.81), (-0.292230876, -0.40164682), (-0.034641016, 0.02))
            Line((-0.034641016, 0.02), (0, 0.04))
            Line((0, 0.04), (1.086540307, 0.04))
            Line((1.086540307, 0.04), (1.086540307, 0))
        make_face()
    fillet_1_piece_12b = extrude(amount=5.716350767, mode=Mode.PRIVATE)
    fillet_1_piece_12b = split(fillet_1_piece_12b, bisect_by=Plane(origin=(5.179096693, -8.792679458, 4), z_dir=(0, 0, 1)), keep=Keep.TOP, mode=Mode.PRIVATE)
    fillet_1_piece_12b = split(fillet_1_piece_12b, bisect_by=Plane(origin=(5.179096693, -8.792679458, 5), z_dir=(0, 0, -1)), keep=Keep.TOP, mode=Mode.PRIVATE)
    fillet_1_piece_12 = fillet_1_piece_12a & fillet_1_piece_12b
    add(fillet_1_piece_12)
    with BuildSketch(Plane(origin=(5, -26.660254038, -4), x_dir=(1, 0, 0), z_dir=(0, 0, 1))) as fillet_1_piece_13a_section:
        with BuildLine():
            CenterArc((FILLET_1_R, FILLET_1_R), FILLET_1_R, 180, 90)
            Line((0, FILLET_1_R), (-FILLET_1_R * 0.02, FILLET_1_R))
            Line((-FILLET_1_R * 0.02, FILLET_1_R), (-FILLET_1_R * 0.02, -FILLET_1_R * 0.02))
            Line((-FILLET_1_R * 0.02, -FILLET_1_R * 0.02), (FILLET_1_R, -FILLET_1_R * 0.02))
            Line((FILLET_1_R, -FILLET_1_R * 0.02), (FILLET_1_R, 0))
        make_face()
    fillet_1_piece_13a = extrude(amount=8, mode=Mode.PRIVATE)
    fillet_1_piece_13a = split(fillet_1_piece_13a, bisect_by=Plane(origin=(5.452790229, -26.207463809, 1), z_dir=(0, 0, -1)), keep=Keep.TOP, mode=Mode.PRIVATE)
    with BuildSketch(Plane(origin=(-5, -26.660254038, 1), x_dir=(0, 0, -1), z_dir=(1, 0, 0))) as fillet_1_piece_13b_section:
        with BuildLine():
            CenterArc((FILLET_1_R, FILLET_1_R), FILLET_1_R, 180, 90)
            Line((0, FILLET_1_R), (-FILLET_1_R * 0.02, FILLET_1_R))
            Line((-FILLET_1_R * 0.02, FILLET_1_R), (-FILLET_1_R * 0.02, -FILLET_1_R * 0.02))
            Line((-FILLET_1_R * 0.02, -FILLET_1_R * 0.02), (FILLET_1_R, -FILLET_1_R * 0.02))
            Line((FILLET_1_R, -FILLET_1_R * 0.02), (FILLET_1_R, 0))
        make_face()
    fillet_1_piece_13b = extrude(amount=15, mode=Mode.PRIVATE)
    fillet_1_piece_13b = split(fillet_1_piece_13b, bisect_by=Plane(origin=(5, -26.207463809, 0.547209771), z_dir=(1, 0, 0)), keep=Keep.TOP, mode=Mode.PRIVATE)
    fillet_1_piece_13 = fillet_1_piece_13a & fillet_1_piece_13b
    add(fillet_1_piece_13)
    with BuildSketch(Plane(origin=(-5, -26.660254038, 4), x_dir=(0, 0, 1), z_dir=(1, 0, 0))) as fillet_1_piece_14a_section:
        with BuildLine():
            CenterArc((FILLET_1_R, -FILLET_1_R), FILLET_1_R, 90, 90)
            Line((0, -FILLET_1_R), (-FILLET_1_R * 0.02, -FILLET_1_R))
            Line((-FILLET_1_R * 0.02, -FILLET_1_R), (-FILLET_1_R * 0.02, FILLET_1_R * 0.02))
            Line((-FILLET_1_R * 0.02, FILLET_1_R * 0.02), (FILLET_1_R, FILLET_1_R * 0.02))
            Line((FILLET_1_R, FILLET_1_R * 0.02), (FILLET_1_R, 0))
        make_face()
    fillet_1_piece_14a = extrude(amount=15, mode=Mode.PRIVATE)
    fillet_1_piece_14a = split(fillet_1_piece_14a, bisect_by=Plane(origin=(5, -26.207463809, 4.452790229), z_dir=(1, 0, 0)), keep=Keep.TOP, mode=Mode.PRIVATE)
    with BuildSketch(Plane(origin=(5, -26.660254038, 1), x_dir=(1, 0, 0), z_dir=(0, 0, 1))) as fillet_1_piece_14b_section:
        with BuildLine():
            CenterArc((FILLET_1_R, FILLET_1_R), FILLET_1_R, 180, 90)
            Line((0, FILLET_1_R), (-FILLET_1_R * 0.02, FILLET_1_R))
            Line((-FILLET_1_R * 0.02, FILLET_1_R), (-FILLET_1_R * 0.02, -FILLET_1_R * 0.02))
            Line((-FILLET_1_R * 0.02, -FILLET_1_R * 0.02), (FILLET_1_R, -FILLET_1_R * 0.02))
            Line((FILLET_1_R, -FILLET_1_R * 0.02), (FILLET_1_R, 0))
        make_face()
    fillet_1_piece_14b = extrude(amount=8, mode=Mode.PRIVATE)
    fillet_1_piece_14b = split(fillet_1_piece_14b, bisect_by=Plane(origin=(5.452790229, -26.207463809, 4), z_dir=(0, 0, 1)), keep=Keep.TOP, mode=Mode.PRIVATE)
    fillet_1_piece_14 = fillet_1_piece_14a & fillet_1_piece_14b
    add(fillet_1_piece_14)
    with BuildSketch(Plane(origin=(-10, -26.660254038, 1), x_dir=(0, 0, -1), z_dir=(1, 0, 0))) as fillet_1_piece_15a_section:
        with BuildLine():
            CenterArc((FILLET_1_R, FILLET_1_R), FILLET_1_R, 180, 90)
            Line((0, FILLET_1_R), (-FILLET_1_R * 0.02, FILLET_1_R))
            Line((-FILLET_1_R * 0.02, FILLET_1_R), (-FILLET_1_R * 0.02, -FILLET_1_R * 0.02))
            Line((-FILLET_1_R * 0.02, -FILLET_1_R * 0.02), (FILLET_1_R, -FILLET_1_R * 0.02))
            Line((FILLET_1_R, -FILLET_1_R * 0.02), (FILLET_1_R, 0))
        make_face()
    fillet_1_piece_15a = extrude(amount=15, mode=Mode.PRIVATE)
    fillet_1_piece_15a = split(fillet_1_piece_15a, bisect_by=Plane(origin=(-5, -26.207463809, 0.547209771), z_dir=(-1, 0, 0)), keep=Keep.TOP, mode=Mode.PRIVATE)
    with BuildSketch(Plane(origin=(-5, -26.660254038, -4), x_dir=(-1, 0, 0), z_dir=(0, 0, 1))) as fillet_1_piece_15b_section:
        with BuildLine():
            CenterArc((FILLET_1_R, -FILLET_1_R), FILLET_1_R, 90, 90)
            Line((0, -FILLET_1_R), (-FILLET_1_R * 0.02, -FILLET_1_R))
            Line((-FILLET_1_R * 0.02, -FILLET_1_R), (-FILLET_1_R * 0.02, FILLET_1_R * 0.02))
            Line((-FILLET_1_R * 0.02, FILLET_1_R * 0.02), (FILLET_1_R, FILLET_1_R * 0.02))
            Line((FILLET_1_R, FILLET_1_R * 0.02), (FILLET_1_R, 0))
        make_face()
    fillet_1_piece_15b = extrude(amount=8, mode=Mode.PRIVATE)
    fillet_1_piece_15b = split(fillet_1_piece_15b, bisect_by=Plane(origin=(-5.452790229, -26.207463809, 1), z_dir=(0, 0, -1)), keep=Keep.TOP, mode=Mode.PRIVATE)
    fillet_1_piece_15 = fillet_1_piece_15a & fillet_1_piece_15b
    add(fillet_1_piece_15)
    with BuildSketch(Plane(origin=(-10, -26.660254038, 4), x_dir=(0, 0, 1), z_dir=(1, 0, 0))) as fillet_1_piece_16a_section:
        with BuildLine():
            CenterArc((FILLET_1_R, -FILLET_1_R), FILLET_1_R, 90, 90)
            Line((0, -FILLET_1_R), (-FILLET_1_R * 0.02, -FILLET_1_R))
            Line((-FILLET_1_R * 0.02, -FILLET_1_R), (-FILLET_1_R * 0.02, FILLET_1_R * 0.02))
            Line((-FILLET_1_R * 0.02, FILLET_1_R * 0.02), (FILLET_1_R, FILLET_1_R * 0.02))
            Line((FILLET_1_R, FILLET_1_R * 0.02), (FILLET_1_R, 0))
        make_face()
    fillet_1_piece_16a = extrude(amount=15, mode=Mode.PRIVATE)
    fillet_1_piece_16a = split(fillet_1_piece_16a, bisect_by=Plane(origin=(-5, -26.207463809, 4.452790229), z_dir=(-1, 0, 0)), keep=Keep.TOP, mode=Mode.PRIVATE)
    with BuildSketch(Plane(origin=(-5, -26.660254038, 1), x_dir=(-1, 0, 0), z_dir=(0, 0, 1))) as fillet_1_piece_16b_section:
        with BuildLine():
            CenterArc((FILLET_1_R, -FILLET_1_R), FILLET_1_R, 90, 90)
            Line((0, -FILLET_1_R), (-FILLET_1_R * 0.02, -FILLET_1_R))
            Line((-FILLET_1_R * 0.02, -FILLET_1_R), (-FILLET_1_R * 0.02, FILLET_1_R * 0.02))
            Line((-FILLET_1_R * 0.02, FILLET_1_R * 0.02), (FILLET_1_R, FILLET_1_R * 0.02))
            Line((FILLET_1_R, FILLET_1_R * 0.02), (FILLET_1_R, 0))
        make_face()
    fillet_1_piece_16b = extrude(amount=8, mode=Mode.PRIVATE)
    fillet_1_piece_16b = split(fillet_1_piece_16b, bisect_by=Plane(origin=(-5.452790229, -26.207463809, 4), z_dir=(0, 0, 1)), keep=Keep.TOP, mode=Mode.PRIVATE)
    fillet_1_piece_16 = fillet_1_piece_16a & fillet_1_piece_16b
    add(fillet_1_piece_16)


solid = part.part
